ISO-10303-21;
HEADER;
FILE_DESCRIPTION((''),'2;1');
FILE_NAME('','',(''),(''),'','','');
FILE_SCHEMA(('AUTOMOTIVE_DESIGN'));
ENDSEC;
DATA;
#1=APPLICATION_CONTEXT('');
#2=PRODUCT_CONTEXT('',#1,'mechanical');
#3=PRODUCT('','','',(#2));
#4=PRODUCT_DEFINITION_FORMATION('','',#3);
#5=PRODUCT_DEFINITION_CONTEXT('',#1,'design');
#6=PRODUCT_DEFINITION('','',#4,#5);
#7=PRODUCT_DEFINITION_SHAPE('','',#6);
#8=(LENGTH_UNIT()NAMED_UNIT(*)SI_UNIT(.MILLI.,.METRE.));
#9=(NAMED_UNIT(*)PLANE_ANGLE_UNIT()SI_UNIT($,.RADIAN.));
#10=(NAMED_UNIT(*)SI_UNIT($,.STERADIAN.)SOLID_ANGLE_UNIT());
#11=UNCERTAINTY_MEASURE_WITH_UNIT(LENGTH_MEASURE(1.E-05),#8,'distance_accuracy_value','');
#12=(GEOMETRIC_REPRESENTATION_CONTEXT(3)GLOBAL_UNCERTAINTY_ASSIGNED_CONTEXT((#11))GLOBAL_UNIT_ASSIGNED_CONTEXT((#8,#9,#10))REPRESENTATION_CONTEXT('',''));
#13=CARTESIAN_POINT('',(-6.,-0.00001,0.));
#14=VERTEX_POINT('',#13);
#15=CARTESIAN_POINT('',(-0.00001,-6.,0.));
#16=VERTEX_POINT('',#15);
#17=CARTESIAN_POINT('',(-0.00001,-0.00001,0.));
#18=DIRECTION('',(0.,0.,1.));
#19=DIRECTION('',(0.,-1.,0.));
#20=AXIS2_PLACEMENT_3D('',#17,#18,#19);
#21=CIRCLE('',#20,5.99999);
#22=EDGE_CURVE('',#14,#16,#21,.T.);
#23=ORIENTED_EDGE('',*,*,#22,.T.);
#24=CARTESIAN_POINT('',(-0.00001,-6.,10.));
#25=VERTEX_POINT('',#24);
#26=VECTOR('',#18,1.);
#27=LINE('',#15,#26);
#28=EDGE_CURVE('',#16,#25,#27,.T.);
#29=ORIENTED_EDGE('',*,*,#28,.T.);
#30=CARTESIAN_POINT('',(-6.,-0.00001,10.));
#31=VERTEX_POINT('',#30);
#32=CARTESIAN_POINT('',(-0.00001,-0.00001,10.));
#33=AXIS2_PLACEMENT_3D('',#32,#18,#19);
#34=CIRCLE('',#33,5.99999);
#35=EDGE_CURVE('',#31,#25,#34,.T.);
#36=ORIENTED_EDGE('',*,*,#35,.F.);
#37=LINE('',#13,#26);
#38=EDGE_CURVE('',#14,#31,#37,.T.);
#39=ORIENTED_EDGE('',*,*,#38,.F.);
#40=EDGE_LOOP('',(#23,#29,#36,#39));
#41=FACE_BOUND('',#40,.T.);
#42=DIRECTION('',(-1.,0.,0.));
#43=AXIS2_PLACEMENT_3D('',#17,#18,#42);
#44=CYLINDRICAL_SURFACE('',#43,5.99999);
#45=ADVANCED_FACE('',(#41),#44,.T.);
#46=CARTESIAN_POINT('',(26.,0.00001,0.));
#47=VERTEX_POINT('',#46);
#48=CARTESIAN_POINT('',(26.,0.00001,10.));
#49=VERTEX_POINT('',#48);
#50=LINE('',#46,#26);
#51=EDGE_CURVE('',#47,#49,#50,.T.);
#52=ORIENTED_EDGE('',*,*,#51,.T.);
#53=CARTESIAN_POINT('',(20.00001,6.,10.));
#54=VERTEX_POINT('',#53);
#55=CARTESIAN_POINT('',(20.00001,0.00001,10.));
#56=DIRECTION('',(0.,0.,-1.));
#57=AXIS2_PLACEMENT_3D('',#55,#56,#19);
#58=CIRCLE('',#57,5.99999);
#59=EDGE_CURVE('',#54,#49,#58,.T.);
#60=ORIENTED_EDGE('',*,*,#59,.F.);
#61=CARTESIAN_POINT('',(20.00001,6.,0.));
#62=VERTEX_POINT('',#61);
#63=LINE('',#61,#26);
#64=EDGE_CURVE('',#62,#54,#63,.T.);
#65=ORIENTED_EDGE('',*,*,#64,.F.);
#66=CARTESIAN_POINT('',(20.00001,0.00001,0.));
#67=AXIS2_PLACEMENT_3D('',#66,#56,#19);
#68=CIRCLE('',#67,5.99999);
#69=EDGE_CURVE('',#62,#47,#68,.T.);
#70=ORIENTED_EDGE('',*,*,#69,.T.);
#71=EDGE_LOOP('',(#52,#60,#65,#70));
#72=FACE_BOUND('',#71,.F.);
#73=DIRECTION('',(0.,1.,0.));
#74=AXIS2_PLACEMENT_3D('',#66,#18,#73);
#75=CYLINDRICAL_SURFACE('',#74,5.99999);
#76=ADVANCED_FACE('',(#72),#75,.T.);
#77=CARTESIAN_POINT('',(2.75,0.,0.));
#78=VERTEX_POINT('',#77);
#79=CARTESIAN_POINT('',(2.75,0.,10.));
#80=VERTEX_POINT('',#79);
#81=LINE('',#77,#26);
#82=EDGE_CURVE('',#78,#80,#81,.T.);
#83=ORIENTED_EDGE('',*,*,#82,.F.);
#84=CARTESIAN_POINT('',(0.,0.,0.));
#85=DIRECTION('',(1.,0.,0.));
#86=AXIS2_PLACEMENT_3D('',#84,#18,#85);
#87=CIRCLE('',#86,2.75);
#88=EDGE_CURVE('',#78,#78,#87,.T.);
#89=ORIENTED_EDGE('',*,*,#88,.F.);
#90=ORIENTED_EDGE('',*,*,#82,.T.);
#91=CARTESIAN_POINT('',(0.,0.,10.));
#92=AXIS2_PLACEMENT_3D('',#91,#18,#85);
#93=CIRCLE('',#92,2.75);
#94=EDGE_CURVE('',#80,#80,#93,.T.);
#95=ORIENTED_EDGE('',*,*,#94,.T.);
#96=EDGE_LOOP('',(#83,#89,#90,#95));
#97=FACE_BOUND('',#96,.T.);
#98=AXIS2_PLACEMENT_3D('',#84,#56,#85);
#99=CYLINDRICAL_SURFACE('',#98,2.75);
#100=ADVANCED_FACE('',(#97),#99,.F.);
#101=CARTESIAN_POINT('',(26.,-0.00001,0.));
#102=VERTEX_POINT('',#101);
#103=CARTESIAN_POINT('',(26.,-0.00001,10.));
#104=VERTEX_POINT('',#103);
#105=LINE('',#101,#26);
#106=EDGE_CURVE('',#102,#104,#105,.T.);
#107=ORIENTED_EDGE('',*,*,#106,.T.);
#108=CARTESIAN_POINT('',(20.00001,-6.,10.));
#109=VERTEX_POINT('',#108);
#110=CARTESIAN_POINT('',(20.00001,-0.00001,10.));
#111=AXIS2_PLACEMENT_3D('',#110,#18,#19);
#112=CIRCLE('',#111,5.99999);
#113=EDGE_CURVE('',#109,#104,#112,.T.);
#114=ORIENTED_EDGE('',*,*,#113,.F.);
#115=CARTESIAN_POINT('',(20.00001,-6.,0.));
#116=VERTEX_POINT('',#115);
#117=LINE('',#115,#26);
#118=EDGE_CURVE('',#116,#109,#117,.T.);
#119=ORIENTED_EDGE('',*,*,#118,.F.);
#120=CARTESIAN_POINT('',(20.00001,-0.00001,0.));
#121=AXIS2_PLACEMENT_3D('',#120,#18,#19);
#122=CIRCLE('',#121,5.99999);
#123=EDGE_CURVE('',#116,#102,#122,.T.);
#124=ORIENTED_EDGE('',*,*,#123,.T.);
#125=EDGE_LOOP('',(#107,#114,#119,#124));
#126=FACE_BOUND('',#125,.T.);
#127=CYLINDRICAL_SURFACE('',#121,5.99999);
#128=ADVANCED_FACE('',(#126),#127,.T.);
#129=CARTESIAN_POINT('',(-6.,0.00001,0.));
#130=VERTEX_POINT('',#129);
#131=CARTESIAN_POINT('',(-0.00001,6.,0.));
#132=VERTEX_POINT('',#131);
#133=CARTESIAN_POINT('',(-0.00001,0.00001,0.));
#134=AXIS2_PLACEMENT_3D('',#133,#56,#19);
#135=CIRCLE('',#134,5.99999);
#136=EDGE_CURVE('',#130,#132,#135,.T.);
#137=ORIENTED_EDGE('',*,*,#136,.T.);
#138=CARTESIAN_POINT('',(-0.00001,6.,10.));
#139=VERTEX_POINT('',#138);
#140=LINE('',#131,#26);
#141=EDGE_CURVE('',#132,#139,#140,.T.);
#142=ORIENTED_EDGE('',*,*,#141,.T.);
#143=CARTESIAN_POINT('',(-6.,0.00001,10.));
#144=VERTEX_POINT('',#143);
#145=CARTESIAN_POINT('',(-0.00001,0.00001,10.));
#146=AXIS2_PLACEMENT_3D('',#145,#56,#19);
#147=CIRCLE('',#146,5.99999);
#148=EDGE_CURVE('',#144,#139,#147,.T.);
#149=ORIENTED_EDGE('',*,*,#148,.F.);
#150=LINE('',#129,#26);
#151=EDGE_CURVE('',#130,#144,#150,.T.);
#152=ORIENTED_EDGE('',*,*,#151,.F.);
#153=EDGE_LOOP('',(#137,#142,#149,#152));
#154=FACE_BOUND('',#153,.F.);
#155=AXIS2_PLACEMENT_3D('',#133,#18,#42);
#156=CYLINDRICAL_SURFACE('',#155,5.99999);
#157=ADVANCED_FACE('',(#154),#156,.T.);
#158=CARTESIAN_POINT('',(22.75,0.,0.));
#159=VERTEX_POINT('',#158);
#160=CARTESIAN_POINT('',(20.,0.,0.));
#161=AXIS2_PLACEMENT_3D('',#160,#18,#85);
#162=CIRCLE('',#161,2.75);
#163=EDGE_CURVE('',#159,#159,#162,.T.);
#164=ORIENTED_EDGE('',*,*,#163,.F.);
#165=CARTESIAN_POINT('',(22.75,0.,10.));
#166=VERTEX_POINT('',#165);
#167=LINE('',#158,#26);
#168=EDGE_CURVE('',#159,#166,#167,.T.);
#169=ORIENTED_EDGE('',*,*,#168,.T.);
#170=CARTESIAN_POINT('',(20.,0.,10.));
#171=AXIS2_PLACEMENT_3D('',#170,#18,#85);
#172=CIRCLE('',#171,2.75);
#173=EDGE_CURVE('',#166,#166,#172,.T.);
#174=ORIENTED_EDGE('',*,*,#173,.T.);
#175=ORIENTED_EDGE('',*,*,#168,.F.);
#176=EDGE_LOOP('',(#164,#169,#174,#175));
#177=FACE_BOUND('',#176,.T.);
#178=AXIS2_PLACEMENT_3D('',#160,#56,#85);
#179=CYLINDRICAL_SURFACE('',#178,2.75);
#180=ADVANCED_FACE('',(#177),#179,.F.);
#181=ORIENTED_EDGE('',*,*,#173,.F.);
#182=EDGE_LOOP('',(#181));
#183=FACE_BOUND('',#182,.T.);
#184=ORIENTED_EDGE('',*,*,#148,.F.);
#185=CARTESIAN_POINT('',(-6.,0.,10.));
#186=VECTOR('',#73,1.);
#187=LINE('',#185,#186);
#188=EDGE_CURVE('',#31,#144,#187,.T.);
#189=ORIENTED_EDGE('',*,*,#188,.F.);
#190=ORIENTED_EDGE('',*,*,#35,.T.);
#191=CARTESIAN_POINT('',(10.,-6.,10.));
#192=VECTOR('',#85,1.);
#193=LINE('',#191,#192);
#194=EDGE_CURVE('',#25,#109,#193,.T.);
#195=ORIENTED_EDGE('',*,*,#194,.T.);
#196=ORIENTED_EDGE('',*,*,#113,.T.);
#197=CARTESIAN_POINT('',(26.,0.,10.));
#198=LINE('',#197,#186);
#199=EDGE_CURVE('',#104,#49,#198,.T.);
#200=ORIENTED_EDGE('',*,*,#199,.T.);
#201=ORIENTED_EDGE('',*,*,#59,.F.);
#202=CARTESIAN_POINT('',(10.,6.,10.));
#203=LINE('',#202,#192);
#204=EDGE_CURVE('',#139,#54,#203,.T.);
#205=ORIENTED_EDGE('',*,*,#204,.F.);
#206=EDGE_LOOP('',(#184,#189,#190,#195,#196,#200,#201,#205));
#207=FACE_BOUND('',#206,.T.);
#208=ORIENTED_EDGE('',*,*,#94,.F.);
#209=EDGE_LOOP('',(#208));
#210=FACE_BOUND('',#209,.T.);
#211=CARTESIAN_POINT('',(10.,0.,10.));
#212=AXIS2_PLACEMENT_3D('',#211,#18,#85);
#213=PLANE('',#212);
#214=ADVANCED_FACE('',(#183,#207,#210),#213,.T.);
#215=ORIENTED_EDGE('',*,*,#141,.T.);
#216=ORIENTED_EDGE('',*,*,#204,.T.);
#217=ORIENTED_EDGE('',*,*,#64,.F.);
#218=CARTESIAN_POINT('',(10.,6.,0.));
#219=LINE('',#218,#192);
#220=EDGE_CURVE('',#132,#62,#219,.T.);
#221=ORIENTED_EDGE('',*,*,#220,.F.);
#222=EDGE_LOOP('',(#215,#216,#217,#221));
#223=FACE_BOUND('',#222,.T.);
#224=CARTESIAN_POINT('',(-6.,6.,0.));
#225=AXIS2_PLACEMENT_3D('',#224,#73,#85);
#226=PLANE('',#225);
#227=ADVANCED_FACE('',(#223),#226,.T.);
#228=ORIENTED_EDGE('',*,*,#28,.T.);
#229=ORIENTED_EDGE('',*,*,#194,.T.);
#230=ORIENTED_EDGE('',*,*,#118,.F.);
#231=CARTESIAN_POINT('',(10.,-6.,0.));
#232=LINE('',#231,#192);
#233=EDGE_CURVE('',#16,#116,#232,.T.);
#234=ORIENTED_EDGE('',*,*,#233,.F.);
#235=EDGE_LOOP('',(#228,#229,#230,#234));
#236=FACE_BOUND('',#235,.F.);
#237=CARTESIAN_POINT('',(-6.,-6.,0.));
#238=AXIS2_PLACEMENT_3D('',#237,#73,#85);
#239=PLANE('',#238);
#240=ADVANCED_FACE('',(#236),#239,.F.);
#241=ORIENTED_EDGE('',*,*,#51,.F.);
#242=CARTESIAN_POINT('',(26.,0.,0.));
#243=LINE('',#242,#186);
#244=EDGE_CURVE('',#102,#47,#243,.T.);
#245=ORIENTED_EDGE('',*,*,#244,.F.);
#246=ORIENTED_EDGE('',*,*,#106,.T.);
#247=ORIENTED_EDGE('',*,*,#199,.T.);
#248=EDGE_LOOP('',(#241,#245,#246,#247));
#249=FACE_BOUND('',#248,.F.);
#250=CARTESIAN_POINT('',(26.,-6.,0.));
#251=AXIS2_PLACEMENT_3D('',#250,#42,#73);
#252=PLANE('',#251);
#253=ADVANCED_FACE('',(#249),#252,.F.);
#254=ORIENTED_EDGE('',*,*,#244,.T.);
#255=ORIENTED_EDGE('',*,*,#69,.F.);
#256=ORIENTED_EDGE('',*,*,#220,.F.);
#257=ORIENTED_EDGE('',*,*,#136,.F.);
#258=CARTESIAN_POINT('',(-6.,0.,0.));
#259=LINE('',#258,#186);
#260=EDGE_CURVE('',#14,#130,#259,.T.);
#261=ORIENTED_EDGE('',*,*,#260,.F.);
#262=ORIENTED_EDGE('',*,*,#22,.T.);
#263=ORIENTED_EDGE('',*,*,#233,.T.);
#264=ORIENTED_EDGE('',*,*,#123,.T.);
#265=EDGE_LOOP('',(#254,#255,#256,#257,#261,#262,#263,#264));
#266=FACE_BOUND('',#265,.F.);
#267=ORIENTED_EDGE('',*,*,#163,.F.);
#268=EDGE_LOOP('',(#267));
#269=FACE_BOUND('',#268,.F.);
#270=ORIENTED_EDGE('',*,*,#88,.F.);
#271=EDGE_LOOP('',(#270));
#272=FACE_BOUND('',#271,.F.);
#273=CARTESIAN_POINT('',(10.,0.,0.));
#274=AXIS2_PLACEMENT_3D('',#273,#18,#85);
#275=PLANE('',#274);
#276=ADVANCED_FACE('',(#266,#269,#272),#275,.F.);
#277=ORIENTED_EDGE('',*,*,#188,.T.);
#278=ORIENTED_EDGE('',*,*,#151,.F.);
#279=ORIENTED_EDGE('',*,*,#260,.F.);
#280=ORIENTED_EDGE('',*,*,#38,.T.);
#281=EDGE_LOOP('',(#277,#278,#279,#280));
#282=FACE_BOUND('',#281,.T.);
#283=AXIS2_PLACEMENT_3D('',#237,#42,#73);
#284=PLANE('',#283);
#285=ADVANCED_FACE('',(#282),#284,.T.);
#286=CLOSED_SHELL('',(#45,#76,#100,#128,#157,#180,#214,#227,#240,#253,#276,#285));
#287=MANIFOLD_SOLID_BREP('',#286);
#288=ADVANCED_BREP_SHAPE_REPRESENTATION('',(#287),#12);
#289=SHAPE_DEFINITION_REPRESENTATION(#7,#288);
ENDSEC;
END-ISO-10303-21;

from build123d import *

# Parameters (mm, degrees)
F0_W     = 32
F0_H     = 12
F0_R     = 2.75
F1_DEPTH = 10
F2_R     = 5.99999


# Not quite as in the source:
# - a fillet or chamfer is up to 0.001 mm smaller than in the source, because OpenCascade refuses the exact size


with BuildPart() as f1:
    # F0 (on Top) → F1 (new body)
    with BuildSketch(Plane.XY):
        with Locations((10, 0)):
            Rectangle(F0_W, F0_H)
        Circle(F0_R, mode=Mode.SUBTRACT)
        with Locations((20, 0)):
            Circle(F0_R, mode=Mode.SUBTRACT)
    extrude(amount=F1_DEPTH)

    # F2 (radius 6 in the source; OpenCascade refuses exactly that, so slightly less here)
    f2_edges = [f1.edges().sort_by_distance(p)[0] for p in [
        (-6, -6, 5),
        (-6, 6, 5),
        (26, -6, 5),
        (26, 6, 5),
    ]]
    fillet(f2_edges, radius=F2_R)


solid = f1.part
